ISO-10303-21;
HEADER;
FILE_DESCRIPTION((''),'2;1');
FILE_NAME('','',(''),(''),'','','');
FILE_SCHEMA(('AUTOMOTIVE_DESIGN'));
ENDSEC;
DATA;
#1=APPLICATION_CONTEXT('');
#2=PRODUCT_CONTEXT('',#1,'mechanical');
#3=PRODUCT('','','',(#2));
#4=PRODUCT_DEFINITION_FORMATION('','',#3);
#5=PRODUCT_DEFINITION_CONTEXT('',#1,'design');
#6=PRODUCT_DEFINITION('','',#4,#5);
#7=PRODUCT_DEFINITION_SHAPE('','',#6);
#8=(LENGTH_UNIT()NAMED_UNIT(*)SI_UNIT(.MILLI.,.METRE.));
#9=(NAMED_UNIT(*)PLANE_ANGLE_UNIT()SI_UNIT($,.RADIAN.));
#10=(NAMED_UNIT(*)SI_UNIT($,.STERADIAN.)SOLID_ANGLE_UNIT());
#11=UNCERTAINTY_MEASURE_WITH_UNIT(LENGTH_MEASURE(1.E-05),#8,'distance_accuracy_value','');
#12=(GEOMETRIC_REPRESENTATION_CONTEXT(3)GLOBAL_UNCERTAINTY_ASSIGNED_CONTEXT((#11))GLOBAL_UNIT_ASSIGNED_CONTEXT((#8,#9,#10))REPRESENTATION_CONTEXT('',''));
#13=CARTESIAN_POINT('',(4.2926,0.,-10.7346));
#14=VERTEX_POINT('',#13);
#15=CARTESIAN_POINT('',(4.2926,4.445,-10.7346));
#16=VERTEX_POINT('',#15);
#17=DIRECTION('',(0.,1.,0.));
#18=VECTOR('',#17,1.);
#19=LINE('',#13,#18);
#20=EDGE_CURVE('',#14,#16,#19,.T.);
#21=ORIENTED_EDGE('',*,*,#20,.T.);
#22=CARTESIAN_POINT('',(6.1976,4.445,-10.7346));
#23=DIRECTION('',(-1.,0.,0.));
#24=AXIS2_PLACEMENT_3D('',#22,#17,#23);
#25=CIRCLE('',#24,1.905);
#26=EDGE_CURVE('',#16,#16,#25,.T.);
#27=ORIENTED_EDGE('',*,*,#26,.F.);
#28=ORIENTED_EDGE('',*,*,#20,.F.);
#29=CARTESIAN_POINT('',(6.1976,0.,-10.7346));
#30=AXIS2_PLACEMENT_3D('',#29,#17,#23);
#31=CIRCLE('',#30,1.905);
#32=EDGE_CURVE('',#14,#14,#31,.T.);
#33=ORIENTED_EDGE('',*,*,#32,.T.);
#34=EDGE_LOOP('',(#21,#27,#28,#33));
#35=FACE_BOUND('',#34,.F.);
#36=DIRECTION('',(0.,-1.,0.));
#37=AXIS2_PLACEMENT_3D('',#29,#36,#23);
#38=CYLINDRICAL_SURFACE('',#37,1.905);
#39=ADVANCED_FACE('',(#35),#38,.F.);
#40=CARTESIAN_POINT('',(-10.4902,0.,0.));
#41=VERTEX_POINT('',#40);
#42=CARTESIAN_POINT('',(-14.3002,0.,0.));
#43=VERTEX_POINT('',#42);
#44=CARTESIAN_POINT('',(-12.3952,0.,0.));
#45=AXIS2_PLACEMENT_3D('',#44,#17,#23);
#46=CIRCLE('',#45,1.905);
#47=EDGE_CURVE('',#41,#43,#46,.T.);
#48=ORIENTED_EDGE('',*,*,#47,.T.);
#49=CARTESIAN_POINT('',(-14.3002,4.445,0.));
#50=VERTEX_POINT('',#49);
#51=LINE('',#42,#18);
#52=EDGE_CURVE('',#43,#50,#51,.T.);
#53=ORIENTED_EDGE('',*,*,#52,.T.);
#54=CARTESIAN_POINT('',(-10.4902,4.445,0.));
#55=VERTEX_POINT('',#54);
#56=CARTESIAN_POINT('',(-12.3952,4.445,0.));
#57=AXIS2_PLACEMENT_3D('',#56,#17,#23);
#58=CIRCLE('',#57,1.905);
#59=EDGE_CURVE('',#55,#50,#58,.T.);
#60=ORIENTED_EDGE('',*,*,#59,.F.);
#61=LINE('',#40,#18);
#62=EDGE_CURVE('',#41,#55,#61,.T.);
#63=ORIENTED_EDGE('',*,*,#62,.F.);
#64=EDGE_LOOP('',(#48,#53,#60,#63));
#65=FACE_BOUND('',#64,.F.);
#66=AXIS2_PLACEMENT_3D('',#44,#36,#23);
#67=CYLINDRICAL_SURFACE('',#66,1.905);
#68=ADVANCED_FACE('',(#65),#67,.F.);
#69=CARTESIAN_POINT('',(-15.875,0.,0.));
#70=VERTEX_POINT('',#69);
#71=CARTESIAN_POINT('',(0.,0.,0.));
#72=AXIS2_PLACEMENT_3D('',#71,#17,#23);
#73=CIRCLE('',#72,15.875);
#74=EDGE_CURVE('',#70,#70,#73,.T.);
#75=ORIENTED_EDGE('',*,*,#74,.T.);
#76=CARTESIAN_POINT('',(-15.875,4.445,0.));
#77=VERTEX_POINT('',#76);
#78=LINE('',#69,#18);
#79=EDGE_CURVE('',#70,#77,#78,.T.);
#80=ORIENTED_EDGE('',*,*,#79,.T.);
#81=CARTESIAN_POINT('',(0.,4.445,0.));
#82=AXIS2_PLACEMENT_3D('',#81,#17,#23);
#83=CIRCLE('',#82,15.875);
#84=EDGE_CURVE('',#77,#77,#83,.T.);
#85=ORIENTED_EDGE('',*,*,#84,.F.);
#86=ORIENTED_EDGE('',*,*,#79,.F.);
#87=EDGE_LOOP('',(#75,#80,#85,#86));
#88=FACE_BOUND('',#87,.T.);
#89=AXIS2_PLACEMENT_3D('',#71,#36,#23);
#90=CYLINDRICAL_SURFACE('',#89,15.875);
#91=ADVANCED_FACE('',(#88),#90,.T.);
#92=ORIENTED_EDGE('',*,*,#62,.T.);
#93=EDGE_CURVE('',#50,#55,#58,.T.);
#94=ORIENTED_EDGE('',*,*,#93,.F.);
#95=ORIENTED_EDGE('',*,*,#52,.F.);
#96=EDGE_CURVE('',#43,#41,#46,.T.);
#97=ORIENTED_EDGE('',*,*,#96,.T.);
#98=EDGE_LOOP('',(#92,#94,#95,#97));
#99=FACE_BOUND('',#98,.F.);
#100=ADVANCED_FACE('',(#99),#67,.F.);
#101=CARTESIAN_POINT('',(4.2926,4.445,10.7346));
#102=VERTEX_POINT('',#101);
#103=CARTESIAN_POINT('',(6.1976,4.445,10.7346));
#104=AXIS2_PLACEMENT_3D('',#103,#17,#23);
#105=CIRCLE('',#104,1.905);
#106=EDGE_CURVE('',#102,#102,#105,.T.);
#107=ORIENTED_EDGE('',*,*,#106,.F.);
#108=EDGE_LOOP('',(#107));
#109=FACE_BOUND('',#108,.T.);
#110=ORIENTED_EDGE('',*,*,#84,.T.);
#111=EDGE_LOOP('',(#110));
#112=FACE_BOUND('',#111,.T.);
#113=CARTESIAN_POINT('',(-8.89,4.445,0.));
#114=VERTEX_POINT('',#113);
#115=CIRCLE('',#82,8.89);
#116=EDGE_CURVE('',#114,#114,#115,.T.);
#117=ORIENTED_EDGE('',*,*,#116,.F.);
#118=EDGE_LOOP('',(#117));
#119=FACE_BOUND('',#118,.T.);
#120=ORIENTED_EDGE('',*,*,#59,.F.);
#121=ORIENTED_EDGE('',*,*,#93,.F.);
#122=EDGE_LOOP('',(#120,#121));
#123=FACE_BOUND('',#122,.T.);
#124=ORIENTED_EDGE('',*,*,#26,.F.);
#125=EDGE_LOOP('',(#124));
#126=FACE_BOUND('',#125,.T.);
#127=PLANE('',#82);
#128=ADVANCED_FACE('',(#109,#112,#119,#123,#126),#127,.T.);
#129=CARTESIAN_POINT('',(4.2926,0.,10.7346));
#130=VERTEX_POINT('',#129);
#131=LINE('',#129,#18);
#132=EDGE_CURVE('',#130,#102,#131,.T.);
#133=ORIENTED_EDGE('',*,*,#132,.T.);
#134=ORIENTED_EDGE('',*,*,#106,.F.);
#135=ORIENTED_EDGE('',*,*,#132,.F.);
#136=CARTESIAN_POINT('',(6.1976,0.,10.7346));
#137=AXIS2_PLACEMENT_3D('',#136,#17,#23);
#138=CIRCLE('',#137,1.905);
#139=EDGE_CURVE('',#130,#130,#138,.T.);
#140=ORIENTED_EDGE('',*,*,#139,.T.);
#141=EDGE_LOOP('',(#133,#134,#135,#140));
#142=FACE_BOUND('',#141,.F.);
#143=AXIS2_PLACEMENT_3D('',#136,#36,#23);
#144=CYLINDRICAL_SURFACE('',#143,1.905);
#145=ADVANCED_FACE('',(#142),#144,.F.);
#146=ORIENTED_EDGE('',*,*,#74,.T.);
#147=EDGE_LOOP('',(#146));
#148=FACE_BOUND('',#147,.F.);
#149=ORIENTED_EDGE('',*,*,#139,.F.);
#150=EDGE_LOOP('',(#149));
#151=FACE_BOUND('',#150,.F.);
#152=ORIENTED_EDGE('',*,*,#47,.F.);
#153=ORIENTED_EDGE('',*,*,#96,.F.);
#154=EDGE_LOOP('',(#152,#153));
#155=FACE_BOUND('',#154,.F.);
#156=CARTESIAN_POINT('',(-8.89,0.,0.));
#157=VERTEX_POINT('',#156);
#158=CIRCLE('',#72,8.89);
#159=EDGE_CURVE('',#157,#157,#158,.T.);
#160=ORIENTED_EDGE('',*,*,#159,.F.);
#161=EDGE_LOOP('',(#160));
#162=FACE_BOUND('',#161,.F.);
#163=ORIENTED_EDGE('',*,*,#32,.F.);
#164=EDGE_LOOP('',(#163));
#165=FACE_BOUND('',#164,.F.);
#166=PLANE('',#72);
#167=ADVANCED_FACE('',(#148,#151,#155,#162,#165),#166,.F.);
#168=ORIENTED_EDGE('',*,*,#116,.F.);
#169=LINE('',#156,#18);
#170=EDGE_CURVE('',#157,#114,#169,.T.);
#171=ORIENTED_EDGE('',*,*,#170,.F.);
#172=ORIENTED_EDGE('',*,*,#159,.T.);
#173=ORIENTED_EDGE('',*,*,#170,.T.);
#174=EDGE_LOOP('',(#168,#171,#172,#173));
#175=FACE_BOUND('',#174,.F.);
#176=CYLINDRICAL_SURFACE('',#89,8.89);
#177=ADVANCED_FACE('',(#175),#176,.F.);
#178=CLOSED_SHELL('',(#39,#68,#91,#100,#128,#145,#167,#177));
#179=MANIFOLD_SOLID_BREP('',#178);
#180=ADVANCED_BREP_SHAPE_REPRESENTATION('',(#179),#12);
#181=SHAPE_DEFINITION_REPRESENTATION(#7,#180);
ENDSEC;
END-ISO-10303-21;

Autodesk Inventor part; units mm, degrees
ref_plane "YZ Plane" through (0, 0, 0) normal (1, 0, 0) x (0, 1, 0)
ref_plane "XZ Plane" through (0, 0, 0) normal (0, 1, 0) x (-1, 0, 0)
ref_plane "XY Plane" through (0, 0, 0) normal (0, 0, 1) x (1, 0, 0)
sketch "Sketch1" plane through (0, 0, 0) normal (0, 1, 0) x (-1, 0, 0)
  circle A0 centre (0, 0) radius 15.875
  line L0 (0, 0) -> (12.3952, 0)
  circle A1 centre (12.3952, 0) radius 1.905
  circle A2 centre (0, 0) radius 8.89
  circle A3 centre (-6.1976, 10.7346) radius 1.905
  circle A4 centre (-6.1976, -10.7346) radius 1.905
  dimension "d0" = 31.75
  dimension "d1" = 12.3952
  dimension "d2" = 3.81
  dimension "d3" = 17.78
  dimension "d6" = 360
extrude "Extrusion1" add sketch "Sketch1" along normal blind 4.445
properties part number "SmallSpoolExpander" material "ABS Plastic"
